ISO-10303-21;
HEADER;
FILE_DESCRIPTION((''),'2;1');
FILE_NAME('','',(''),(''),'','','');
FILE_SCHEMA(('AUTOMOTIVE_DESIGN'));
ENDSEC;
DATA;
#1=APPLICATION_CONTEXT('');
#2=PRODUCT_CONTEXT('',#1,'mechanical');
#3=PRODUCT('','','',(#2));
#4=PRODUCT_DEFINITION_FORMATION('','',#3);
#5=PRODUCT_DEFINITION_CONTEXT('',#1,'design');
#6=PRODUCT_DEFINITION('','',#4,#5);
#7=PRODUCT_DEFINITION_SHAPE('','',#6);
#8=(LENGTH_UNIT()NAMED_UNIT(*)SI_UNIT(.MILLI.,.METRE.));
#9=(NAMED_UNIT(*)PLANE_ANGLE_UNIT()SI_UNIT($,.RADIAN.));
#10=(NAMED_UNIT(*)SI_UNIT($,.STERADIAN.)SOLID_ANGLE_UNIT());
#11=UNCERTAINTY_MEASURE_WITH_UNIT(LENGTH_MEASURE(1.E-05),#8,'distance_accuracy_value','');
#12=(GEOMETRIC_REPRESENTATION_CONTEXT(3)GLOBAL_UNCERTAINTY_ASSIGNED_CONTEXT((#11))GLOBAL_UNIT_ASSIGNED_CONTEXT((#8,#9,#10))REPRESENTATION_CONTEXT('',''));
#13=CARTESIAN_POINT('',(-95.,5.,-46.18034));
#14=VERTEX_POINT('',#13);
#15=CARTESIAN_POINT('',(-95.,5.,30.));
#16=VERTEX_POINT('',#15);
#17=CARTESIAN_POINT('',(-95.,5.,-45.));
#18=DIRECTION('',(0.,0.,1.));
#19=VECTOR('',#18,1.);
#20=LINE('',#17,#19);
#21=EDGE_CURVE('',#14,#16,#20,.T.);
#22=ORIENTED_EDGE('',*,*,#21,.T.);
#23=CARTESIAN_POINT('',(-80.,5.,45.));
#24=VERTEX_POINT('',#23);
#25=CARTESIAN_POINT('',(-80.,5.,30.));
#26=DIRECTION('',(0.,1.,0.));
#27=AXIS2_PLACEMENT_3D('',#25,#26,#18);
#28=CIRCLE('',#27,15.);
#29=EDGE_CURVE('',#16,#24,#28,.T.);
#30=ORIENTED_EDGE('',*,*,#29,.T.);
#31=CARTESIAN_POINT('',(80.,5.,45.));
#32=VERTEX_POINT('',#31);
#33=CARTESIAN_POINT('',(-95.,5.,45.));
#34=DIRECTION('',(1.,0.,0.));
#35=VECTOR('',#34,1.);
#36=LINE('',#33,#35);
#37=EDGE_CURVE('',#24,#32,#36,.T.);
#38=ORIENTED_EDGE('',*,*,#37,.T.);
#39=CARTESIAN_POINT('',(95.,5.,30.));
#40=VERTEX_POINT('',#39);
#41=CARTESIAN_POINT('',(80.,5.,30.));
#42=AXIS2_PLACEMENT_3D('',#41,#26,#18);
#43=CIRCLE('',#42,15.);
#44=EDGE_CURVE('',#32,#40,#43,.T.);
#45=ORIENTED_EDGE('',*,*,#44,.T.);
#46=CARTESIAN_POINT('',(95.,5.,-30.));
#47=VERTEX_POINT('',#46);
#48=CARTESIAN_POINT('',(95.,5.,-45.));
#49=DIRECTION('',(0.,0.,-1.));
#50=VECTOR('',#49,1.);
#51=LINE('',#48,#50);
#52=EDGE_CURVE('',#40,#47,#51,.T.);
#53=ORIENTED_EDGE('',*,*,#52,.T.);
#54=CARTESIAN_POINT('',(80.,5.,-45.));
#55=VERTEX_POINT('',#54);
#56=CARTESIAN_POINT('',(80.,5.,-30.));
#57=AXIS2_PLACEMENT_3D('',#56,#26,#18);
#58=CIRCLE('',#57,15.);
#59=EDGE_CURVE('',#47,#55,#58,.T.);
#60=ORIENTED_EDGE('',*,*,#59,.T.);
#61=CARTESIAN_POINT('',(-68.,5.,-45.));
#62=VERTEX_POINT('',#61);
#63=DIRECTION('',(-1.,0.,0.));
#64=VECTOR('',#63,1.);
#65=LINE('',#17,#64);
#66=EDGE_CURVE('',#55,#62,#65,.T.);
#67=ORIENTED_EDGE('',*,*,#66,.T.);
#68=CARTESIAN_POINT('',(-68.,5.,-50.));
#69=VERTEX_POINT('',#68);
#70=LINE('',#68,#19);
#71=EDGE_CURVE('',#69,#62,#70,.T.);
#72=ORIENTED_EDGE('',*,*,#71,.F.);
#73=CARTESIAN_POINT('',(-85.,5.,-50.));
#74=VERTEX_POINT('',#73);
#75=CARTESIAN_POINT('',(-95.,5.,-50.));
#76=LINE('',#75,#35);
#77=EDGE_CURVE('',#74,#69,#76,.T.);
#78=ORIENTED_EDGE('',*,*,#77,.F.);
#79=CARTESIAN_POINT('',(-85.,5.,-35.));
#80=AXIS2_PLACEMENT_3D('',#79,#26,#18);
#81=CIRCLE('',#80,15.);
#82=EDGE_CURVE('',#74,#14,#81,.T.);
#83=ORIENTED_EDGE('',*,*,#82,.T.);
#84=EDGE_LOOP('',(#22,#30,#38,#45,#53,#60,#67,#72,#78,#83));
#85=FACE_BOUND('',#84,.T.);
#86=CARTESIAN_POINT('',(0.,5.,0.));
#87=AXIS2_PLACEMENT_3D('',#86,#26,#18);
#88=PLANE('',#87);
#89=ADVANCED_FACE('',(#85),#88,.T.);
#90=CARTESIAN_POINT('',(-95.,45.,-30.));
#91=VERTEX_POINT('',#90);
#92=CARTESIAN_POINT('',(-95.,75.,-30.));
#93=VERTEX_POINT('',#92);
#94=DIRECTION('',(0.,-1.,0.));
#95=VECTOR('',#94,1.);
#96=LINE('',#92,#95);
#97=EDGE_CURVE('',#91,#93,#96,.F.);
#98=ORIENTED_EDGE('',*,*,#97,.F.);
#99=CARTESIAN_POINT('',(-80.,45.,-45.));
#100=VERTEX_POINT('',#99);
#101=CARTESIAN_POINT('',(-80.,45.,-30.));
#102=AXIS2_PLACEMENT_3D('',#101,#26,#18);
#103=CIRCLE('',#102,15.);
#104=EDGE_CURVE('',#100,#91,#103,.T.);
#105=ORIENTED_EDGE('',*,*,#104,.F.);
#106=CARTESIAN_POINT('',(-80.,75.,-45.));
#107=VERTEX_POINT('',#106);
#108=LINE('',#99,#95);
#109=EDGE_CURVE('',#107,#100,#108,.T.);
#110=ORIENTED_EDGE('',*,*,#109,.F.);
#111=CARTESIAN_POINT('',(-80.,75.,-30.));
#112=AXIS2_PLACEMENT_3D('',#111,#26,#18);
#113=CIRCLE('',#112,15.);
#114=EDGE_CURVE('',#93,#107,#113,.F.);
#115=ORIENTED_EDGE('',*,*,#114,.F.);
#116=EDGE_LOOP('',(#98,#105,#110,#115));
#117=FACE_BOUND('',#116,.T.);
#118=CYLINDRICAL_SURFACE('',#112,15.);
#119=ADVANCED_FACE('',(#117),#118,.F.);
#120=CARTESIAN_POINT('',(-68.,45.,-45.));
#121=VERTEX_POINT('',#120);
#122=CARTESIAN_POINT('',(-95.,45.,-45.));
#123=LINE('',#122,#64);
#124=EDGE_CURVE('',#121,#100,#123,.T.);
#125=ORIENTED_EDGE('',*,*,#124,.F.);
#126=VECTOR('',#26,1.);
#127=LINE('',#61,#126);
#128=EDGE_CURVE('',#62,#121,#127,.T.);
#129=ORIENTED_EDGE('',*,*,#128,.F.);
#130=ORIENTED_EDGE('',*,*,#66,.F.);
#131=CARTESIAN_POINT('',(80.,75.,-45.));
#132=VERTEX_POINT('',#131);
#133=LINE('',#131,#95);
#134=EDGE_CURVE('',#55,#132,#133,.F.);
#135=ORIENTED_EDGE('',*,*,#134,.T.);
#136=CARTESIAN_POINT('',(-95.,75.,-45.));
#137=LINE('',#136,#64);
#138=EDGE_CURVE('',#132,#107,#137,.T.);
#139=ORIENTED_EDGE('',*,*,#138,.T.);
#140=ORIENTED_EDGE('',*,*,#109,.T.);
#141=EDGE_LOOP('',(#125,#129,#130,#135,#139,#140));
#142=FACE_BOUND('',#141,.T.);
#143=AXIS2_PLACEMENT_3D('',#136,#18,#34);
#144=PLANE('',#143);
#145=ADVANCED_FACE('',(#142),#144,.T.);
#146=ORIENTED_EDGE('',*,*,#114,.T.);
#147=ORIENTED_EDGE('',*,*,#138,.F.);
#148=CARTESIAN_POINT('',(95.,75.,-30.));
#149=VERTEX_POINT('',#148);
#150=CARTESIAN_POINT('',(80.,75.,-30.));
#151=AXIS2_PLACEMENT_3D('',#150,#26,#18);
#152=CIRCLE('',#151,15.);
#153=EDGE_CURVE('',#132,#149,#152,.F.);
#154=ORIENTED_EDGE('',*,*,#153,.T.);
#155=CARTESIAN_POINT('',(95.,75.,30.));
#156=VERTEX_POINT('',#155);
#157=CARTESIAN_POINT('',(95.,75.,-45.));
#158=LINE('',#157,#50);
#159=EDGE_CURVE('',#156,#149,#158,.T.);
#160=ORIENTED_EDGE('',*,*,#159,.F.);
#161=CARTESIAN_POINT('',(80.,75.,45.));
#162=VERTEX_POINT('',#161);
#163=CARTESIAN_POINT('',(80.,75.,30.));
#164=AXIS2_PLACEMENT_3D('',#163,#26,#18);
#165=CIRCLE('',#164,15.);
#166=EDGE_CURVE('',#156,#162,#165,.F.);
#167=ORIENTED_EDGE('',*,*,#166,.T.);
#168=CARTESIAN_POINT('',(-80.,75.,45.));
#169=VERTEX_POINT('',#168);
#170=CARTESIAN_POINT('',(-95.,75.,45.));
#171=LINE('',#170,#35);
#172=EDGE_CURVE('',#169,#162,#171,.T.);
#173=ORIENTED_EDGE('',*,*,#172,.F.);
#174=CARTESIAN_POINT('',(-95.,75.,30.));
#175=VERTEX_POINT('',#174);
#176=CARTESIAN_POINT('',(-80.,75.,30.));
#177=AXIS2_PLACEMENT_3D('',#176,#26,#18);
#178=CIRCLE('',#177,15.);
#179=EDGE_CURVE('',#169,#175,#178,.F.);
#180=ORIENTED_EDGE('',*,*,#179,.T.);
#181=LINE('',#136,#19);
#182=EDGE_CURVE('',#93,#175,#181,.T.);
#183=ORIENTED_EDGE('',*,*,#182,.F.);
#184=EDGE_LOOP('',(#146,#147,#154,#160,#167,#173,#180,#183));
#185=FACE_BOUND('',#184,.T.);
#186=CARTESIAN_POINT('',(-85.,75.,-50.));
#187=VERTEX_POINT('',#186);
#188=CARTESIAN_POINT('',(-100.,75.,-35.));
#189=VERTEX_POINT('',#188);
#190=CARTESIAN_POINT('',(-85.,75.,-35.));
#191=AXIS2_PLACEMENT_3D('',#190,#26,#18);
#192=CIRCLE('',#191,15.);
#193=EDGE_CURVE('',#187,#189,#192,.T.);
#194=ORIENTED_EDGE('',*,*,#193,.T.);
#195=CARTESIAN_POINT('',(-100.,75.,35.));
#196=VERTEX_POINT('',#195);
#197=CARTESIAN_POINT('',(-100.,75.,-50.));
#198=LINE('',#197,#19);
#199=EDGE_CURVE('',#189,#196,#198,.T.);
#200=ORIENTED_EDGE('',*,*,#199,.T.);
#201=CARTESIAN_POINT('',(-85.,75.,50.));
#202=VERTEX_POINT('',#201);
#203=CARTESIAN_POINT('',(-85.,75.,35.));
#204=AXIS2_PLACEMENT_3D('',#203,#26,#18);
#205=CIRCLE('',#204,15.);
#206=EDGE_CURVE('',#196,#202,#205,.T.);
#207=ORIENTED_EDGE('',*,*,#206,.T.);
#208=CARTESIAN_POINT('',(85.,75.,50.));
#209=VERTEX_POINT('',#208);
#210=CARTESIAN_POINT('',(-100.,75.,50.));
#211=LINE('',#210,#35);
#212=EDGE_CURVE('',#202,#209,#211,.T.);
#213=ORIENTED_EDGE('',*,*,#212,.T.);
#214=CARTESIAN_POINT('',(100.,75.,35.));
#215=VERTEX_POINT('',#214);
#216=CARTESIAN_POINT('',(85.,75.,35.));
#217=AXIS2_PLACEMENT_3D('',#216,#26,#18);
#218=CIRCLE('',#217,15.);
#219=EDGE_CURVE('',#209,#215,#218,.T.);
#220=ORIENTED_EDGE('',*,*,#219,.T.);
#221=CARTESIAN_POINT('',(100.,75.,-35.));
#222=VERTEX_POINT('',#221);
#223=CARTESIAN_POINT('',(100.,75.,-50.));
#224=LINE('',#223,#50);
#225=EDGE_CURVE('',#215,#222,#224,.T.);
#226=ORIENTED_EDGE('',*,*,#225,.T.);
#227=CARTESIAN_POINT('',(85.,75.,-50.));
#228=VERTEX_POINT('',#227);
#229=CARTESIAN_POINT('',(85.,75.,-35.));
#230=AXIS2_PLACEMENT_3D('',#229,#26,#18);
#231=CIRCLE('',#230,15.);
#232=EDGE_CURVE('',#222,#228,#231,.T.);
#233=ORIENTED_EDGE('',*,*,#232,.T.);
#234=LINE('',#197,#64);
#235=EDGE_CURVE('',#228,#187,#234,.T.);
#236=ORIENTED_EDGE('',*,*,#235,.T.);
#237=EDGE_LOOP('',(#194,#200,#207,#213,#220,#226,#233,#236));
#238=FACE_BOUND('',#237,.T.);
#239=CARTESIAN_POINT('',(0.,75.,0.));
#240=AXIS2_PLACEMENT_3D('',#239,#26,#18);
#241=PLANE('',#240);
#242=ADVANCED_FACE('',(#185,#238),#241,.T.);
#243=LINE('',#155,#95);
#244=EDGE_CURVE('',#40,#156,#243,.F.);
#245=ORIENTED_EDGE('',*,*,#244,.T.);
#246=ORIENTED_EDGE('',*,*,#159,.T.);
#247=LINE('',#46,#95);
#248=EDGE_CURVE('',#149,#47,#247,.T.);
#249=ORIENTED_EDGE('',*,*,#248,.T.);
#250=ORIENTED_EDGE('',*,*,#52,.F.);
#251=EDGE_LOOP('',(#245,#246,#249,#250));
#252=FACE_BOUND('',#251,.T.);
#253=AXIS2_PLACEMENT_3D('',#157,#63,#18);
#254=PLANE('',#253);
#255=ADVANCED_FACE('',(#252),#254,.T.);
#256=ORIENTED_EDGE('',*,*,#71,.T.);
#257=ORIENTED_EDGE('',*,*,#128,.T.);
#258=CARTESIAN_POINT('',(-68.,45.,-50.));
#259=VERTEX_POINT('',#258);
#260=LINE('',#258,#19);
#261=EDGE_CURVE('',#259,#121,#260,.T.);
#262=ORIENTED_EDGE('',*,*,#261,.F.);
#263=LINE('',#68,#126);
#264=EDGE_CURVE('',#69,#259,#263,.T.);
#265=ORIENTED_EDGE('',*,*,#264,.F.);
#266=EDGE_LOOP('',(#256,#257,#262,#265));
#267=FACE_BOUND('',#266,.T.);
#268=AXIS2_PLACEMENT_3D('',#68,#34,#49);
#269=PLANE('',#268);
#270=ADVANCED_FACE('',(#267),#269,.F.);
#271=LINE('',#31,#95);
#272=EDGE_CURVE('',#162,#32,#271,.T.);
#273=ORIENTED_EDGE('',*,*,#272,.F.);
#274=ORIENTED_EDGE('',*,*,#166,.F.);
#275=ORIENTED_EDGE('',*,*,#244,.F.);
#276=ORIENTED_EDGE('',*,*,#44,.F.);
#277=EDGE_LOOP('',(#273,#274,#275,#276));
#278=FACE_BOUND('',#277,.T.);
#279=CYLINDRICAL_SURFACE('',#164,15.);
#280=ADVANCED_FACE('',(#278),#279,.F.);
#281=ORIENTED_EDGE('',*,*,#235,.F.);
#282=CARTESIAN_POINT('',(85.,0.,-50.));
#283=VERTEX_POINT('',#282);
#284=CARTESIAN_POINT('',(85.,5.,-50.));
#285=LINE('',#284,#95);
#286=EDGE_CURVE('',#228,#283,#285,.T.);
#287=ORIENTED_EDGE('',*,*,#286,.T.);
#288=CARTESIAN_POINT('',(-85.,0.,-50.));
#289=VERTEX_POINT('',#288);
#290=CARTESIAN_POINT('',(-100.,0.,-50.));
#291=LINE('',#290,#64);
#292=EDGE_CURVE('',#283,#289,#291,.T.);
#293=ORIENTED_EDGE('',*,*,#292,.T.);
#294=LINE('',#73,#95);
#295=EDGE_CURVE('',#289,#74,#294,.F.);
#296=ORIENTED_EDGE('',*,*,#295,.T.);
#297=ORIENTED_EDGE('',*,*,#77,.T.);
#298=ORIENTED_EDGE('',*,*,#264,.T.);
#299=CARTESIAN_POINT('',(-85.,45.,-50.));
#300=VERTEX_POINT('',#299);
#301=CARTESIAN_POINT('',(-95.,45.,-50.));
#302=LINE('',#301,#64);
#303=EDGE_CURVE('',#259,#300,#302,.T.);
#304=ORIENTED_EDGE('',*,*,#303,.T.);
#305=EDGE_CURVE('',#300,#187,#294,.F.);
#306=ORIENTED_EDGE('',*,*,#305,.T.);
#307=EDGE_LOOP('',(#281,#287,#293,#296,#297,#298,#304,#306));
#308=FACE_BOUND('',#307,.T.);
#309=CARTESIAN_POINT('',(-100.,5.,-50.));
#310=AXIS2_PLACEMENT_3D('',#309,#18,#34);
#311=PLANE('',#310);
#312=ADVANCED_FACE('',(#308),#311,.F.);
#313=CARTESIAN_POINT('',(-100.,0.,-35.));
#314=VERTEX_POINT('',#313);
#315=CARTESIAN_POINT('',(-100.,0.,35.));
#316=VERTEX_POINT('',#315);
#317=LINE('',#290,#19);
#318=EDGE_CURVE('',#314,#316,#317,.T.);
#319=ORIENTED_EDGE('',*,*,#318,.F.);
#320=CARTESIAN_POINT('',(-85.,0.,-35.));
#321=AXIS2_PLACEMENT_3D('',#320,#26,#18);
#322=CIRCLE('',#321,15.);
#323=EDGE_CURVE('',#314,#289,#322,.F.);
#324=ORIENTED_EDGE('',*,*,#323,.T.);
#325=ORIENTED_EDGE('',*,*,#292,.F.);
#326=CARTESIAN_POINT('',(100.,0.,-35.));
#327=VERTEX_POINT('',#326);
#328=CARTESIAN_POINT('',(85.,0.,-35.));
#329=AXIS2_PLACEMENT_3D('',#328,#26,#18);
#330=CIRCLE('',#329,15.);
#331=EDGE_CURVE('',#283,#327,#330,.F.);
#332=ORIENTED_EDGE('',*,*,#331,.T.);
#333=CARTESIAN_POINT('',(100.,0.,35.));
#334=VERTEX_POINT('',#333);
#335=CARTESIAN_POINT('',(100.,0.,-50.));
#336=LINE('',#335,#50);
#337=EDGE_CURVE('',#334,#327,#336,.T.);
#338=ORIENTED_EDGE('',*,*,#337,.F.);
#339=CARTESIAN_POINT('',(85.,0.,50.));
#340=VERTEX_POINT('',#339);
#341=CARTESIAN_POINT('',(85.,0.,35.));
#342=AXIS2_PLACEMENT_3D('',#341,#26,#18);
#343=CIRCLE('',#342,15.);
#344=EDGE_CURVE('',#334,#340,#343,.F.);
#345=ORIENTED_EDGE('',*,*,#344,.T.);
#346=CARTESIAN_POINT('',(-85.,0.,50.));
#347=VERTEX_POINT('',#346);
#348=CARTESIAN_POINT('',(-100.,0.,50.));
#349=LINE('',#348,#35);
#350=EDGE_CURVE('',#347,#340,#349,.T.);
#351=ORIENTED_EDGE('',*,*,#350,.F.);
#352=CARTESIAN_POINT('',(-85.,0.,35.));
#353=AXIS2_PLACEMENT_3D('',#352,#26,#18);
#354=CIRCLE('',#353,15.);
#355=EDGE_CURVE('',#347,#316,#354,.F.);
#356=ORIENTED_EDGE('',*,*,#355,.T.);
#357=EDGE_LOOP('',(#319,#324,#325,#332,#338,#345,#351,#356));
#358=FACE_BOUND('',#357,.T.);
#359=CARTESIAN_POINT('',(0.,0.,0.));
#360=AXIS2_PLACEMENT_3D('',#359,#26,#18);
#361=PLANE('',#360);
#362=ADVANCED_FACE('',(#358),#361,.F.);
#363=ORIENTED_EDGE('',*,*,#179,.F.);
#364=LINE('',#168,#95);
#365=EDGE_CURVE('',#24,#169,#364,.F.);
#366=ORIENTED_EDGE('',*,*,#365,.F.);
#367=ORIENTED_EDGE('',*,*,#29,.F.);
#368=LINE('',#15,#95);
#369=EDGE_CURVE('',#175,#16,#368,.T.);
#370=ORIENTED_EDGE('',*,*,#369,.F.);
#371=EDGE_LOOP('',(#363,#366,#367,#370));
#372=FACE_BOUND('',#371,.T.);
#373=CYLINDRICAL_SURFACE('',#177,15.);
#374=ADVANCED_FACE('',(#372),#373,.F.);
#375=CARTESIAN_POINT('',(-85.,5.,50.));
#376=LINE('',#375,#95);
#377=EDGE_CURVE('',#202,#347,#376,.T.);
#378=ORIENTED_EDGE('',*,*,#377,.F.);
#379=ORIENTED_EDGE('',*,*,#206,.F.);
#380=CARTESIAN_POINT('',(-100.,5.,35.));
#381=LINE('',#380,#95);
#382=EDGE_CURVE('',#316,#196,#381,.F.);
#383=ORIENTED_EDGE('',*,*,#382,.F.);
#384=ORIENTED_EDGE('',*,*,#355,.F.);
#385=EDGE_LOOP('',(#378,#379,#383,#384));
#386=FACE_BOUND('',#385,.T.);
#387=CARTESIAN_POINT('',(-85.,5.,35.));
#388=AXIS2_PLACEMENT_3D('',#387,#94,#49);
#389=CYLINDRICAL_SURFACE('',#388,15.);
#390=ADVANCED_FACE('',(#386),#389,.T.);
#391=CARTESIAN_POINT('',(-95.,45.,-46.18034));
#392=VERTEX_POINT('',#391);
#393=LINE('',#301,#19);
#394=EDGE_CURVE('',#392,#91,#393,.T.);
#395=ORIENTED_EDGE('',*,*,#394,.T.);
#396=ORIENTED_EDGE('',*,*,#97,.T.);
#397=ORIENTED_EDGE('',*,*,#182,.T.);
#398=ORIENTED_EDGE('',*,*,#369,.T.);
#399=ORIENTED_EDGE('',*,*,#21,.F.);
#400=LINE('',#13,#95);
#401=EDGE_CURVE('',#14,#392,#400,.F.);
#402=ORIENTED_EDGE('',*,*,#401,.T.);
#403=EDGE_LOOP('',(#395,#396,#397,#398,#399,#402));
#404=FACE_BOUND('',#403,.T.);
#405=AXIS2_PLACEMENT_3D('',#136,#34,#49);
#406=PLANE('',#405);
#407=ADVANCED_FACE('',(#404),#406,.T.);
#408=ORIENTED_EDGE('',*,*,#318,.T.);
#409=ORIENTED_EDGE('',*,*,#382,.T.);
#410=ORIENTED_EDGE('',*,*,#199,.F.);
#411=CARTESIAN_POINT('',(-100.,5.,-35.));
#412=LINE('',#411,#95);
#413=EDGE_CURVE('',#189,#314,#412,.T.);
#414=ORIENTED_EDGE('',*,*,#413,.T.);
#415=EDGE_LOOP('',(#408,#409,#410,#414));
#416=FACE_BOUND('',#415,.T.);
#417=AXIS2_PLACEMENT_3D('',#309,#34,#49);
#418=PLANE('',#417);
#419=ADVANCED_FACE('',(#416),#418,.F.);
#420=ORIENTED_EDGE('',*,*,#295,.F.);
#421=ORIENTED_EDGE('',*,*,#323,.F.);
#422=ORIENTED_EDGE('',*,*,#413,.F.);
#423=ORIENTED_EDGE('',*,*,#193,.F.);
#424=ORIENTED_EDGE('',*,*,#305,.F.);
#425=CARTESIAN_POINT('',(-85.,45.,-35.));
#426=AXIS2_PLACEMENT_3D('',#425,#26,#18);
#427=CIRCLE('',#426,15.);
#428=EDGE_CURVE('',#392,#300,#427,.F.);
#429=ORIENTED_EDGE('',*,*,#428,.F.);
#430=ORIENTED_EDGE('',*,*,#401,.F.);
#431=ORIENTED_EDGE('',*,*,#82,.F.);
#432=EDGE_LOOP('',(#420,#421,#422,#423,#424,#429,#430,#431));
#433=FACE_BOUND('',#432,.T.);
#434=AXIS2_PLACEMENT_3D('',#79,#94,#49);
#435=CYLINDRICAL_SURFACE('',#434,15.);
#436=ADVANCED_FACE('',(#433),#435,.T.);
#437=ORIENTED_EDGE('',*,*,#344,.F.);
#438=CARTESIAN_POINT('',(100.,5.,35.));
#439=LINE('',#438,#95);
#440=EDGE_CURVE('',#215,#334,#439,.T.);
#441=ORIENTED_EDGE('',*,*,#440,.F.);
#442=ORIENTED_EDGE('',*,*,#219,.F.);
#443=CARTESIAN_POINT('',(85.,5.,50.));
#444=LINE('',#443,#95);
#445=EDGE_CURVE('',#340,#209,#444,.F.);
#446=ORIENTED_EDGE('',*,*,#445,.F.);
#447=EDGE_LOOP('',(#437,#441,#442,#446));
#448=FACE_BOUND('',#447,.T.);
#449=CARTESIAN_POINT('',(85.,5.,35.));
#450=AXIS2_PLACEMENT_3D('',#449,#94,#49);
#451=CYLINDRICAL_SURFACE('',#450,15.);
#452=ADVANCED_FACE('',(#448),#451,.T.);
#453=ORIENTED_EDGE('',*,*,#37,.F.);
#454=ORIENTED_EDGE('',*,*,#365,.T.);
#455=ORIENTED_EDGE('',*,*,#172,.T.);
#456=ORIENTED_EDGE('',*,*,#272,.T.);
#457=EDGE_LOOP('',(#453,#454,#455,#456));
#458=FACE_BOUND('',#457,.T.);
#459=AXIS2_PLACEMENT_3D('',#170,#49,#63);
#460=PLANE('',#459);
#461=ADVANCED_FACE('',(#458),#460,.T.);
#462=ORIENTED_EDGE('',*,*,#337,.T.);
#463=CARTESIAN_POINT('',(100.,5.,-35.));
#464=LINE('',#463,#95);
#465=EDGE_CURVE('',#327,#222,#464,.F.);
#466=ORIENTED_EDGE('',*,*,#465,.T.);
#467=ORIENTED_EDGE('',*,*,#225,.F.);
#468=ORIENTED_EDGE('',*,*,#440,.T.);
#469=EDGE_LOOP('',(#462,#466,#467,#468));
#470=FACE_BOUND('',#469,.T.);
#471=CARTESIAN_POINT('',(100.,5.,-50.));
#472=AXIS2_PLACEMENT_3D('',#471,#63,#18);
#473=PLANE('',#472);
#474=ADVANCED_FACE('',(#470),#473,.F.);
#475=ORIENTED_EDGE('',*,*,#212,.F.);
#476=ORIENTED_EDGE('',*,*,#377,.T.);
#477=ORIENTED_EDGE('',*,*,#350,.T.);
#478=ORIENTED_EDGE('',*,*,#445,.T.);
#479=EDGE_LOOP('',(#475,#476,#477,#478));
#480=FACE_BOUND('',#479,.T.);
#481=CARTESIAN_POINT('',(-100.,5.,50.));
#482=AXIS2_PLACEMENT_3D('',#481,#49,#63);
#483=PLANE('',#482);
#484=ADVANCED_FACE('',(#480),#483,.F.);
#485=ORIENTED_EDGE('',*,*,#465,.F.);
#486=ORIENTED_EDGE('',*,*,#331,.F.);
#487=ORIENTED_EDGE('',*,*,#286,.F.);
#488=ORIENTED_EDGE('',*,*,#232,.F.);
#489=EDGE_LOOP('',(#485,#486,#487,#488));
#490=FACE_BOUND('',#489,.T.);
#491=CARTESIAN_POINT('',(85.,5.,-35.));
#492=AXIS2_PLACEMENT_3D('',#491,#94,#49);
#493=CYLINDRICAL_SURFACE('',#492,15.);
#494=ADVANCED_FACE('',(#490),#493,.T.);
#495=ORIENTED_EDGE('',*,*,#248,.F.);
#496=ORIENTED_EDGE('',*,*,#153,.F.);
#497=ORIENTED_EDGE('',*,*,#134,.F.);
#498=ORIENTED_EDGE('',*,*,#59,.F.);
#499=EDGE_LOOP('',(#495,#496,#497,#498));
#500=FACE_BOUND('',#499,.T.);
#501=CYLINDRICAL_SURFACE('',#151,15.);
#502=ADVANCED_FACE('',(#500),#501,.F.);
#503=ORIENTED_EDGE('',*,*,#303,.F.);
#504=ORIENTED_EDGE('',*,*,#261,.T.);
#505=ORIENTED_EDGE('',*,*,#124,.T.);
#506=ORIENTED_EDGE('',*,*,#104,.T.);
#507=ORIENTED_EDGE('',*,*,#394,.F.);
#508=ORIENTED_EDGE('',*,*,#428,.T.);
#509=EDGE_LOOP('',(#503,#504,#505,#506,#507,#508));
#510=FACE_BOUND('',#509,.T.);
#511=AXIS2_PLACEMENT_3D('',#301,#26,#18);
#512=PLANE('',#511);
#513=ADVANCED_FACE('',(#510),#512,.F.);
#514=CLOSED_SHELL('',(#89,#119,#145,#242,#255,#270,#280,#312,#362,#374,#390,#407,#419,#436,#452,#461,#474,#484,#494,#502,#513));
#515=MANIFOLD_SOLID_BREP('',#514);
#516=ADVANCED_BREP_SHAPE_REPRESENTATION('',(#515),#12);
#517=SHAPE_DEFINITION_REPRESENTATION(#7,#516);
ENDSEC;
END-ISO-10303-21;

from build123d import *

# Parameters (mm, degrees)
SKETCH1_W           = 200
SKETCH1_H           = 100
BOSS_EXTRUDE1_DEPTH = 5
SKETCH2_W           = 200
SKETCH2_H           = 100
SKETCH2_W_2         = 190
SKETCH2_H_2         = 90
BOSS_EXTRUDE2_DEPTH = 70
SKETCH3_W           = 27
SKETCH3_H           = 40
CUT_EXTRUDE1_DEPTH  = 158.003184681
FILLET1_R           = 15


with BuildPart() as part:
    # Sketch1 → Boss-Extrude1 (new body)
    with BuildSketch(Plane(origin=(0, 0, 0), x_dir=(1, 0, 0), z_dir=(0, 1, 0))):
        Rectangle(SKETCH1_W, SKETCH1_H)
    extrude(amount=BOSS_EXTRUDE1_DEPTH)

    # Sketch2 → Boss-Extrude2 (add)
    with BuildSketch(Plane(origin=(0, 5, 0), x_dir=(1, 0, 0), z_dir=(0, 1, 0))):
        Rectangle(SKETCH2_W, SKETCH2_H)
        Rectangle(SKETCH2_W_2, SKETCH2_H_2, mode=Mode.SUBTRACT)
    extrude(amount=BOSS_EXTRUDE2_DEPTH)

    # Sketch3 → Cut-Extrude1 (cut, through all)
    with BuildSketch(Plane.XY.offset(-45)):
        with Locations((-81.5, 25)):
            Rectangle(SKETCH3_W, SKETCH3_H)
    extrude(amount=-CUT_EXTRUDE1_DEPTH, mode=Mode.SUBTRACT)

    # Fillet1
    # the kernel refuses this fillet: 15 mm, written as the material it adds along each edge
    with BuildSketch(Plane(origin=(95, 5, 45), x_dir=(0, 0, -1), z_dir=(0, 1, 0)), Plane(origin=(95, 5, -45), x_dir=(-1, 0, 0), z_dir=(0, 1, 0)), Plane(origin=(-95, 5, 45), x_dir=(1, 0, 0), z_dir=(0, 1, 0))) as fillet1_piece_1:
        with BuildLine():
            CenterArc((FILLET1_R, FILLET1_R), FILLET1_R, 180, 90)
            Line((0, FILLET1_R), (0, 0))
            Line((0, 0), (FILLET1_R, 0))
        make_face()
    extrude(amount=70)
    with BuildSketch(Plane(origin=(-95, 45, -45), x_dir=(1, 0, 0), z_dir=(0, 1, 0))) as fillet1_piece_2:
        with BuildLine():
            CenterArc((FILLET1_R, -FILLET1_R), FILLET1_R, 90, 90)
            Line((0, -FILLET1_R), (0, 0))
            Line((0, 0), (FILLET1_R, 0))
        make_face()
    extrude(amount=30)
    # the kernel refuses this fillet: 15 mm, written as the material it takes off along each edge
    with BuildSketch(Plane(origin=(100, 112.5, -50), x_dir=(-1, 0, 0), z_dir=(0, -1, 0)), Plane(origin=(-100, -37.5, -50), x_dir=(1, 0, 0), z_dir=(0, 1, 0)), Plane(origin=(100, 112.5, 50), x_dir=(0, 0, -1), z_dir=(0, -1, 0))) as fillet1_2_piece_1:
        with BuildLine():
            CenterArc((FILLET1_R, -FILLET1_R), FILLET1_R, 90, 90)
            Line((0, -FILLET1_R), (0, 0))
            Line((0, 0), (FILLET1_R, 0))
        make_face()
    extrude(amount=150, mode=Mode.SUBTRACT)
    with BuildSketch(Plane(origin=(-100, -37.5, 50), x_dir=(1, 0, 0), z_dir=(0, 1, 0))) as fillet1_2_piece_2:
        with BuildLine():
            CenterArc((FILLET1_R, FILLET1_R), FILLET1_R, 180, 90)
            Line((0, FILLET1_R), (0, 0))
            Line((0, 0), (FILLET1_R, 0))
        make_face()
    extrude(amount=150, mode=Mode.SUBTRACT)


solid = part.part
